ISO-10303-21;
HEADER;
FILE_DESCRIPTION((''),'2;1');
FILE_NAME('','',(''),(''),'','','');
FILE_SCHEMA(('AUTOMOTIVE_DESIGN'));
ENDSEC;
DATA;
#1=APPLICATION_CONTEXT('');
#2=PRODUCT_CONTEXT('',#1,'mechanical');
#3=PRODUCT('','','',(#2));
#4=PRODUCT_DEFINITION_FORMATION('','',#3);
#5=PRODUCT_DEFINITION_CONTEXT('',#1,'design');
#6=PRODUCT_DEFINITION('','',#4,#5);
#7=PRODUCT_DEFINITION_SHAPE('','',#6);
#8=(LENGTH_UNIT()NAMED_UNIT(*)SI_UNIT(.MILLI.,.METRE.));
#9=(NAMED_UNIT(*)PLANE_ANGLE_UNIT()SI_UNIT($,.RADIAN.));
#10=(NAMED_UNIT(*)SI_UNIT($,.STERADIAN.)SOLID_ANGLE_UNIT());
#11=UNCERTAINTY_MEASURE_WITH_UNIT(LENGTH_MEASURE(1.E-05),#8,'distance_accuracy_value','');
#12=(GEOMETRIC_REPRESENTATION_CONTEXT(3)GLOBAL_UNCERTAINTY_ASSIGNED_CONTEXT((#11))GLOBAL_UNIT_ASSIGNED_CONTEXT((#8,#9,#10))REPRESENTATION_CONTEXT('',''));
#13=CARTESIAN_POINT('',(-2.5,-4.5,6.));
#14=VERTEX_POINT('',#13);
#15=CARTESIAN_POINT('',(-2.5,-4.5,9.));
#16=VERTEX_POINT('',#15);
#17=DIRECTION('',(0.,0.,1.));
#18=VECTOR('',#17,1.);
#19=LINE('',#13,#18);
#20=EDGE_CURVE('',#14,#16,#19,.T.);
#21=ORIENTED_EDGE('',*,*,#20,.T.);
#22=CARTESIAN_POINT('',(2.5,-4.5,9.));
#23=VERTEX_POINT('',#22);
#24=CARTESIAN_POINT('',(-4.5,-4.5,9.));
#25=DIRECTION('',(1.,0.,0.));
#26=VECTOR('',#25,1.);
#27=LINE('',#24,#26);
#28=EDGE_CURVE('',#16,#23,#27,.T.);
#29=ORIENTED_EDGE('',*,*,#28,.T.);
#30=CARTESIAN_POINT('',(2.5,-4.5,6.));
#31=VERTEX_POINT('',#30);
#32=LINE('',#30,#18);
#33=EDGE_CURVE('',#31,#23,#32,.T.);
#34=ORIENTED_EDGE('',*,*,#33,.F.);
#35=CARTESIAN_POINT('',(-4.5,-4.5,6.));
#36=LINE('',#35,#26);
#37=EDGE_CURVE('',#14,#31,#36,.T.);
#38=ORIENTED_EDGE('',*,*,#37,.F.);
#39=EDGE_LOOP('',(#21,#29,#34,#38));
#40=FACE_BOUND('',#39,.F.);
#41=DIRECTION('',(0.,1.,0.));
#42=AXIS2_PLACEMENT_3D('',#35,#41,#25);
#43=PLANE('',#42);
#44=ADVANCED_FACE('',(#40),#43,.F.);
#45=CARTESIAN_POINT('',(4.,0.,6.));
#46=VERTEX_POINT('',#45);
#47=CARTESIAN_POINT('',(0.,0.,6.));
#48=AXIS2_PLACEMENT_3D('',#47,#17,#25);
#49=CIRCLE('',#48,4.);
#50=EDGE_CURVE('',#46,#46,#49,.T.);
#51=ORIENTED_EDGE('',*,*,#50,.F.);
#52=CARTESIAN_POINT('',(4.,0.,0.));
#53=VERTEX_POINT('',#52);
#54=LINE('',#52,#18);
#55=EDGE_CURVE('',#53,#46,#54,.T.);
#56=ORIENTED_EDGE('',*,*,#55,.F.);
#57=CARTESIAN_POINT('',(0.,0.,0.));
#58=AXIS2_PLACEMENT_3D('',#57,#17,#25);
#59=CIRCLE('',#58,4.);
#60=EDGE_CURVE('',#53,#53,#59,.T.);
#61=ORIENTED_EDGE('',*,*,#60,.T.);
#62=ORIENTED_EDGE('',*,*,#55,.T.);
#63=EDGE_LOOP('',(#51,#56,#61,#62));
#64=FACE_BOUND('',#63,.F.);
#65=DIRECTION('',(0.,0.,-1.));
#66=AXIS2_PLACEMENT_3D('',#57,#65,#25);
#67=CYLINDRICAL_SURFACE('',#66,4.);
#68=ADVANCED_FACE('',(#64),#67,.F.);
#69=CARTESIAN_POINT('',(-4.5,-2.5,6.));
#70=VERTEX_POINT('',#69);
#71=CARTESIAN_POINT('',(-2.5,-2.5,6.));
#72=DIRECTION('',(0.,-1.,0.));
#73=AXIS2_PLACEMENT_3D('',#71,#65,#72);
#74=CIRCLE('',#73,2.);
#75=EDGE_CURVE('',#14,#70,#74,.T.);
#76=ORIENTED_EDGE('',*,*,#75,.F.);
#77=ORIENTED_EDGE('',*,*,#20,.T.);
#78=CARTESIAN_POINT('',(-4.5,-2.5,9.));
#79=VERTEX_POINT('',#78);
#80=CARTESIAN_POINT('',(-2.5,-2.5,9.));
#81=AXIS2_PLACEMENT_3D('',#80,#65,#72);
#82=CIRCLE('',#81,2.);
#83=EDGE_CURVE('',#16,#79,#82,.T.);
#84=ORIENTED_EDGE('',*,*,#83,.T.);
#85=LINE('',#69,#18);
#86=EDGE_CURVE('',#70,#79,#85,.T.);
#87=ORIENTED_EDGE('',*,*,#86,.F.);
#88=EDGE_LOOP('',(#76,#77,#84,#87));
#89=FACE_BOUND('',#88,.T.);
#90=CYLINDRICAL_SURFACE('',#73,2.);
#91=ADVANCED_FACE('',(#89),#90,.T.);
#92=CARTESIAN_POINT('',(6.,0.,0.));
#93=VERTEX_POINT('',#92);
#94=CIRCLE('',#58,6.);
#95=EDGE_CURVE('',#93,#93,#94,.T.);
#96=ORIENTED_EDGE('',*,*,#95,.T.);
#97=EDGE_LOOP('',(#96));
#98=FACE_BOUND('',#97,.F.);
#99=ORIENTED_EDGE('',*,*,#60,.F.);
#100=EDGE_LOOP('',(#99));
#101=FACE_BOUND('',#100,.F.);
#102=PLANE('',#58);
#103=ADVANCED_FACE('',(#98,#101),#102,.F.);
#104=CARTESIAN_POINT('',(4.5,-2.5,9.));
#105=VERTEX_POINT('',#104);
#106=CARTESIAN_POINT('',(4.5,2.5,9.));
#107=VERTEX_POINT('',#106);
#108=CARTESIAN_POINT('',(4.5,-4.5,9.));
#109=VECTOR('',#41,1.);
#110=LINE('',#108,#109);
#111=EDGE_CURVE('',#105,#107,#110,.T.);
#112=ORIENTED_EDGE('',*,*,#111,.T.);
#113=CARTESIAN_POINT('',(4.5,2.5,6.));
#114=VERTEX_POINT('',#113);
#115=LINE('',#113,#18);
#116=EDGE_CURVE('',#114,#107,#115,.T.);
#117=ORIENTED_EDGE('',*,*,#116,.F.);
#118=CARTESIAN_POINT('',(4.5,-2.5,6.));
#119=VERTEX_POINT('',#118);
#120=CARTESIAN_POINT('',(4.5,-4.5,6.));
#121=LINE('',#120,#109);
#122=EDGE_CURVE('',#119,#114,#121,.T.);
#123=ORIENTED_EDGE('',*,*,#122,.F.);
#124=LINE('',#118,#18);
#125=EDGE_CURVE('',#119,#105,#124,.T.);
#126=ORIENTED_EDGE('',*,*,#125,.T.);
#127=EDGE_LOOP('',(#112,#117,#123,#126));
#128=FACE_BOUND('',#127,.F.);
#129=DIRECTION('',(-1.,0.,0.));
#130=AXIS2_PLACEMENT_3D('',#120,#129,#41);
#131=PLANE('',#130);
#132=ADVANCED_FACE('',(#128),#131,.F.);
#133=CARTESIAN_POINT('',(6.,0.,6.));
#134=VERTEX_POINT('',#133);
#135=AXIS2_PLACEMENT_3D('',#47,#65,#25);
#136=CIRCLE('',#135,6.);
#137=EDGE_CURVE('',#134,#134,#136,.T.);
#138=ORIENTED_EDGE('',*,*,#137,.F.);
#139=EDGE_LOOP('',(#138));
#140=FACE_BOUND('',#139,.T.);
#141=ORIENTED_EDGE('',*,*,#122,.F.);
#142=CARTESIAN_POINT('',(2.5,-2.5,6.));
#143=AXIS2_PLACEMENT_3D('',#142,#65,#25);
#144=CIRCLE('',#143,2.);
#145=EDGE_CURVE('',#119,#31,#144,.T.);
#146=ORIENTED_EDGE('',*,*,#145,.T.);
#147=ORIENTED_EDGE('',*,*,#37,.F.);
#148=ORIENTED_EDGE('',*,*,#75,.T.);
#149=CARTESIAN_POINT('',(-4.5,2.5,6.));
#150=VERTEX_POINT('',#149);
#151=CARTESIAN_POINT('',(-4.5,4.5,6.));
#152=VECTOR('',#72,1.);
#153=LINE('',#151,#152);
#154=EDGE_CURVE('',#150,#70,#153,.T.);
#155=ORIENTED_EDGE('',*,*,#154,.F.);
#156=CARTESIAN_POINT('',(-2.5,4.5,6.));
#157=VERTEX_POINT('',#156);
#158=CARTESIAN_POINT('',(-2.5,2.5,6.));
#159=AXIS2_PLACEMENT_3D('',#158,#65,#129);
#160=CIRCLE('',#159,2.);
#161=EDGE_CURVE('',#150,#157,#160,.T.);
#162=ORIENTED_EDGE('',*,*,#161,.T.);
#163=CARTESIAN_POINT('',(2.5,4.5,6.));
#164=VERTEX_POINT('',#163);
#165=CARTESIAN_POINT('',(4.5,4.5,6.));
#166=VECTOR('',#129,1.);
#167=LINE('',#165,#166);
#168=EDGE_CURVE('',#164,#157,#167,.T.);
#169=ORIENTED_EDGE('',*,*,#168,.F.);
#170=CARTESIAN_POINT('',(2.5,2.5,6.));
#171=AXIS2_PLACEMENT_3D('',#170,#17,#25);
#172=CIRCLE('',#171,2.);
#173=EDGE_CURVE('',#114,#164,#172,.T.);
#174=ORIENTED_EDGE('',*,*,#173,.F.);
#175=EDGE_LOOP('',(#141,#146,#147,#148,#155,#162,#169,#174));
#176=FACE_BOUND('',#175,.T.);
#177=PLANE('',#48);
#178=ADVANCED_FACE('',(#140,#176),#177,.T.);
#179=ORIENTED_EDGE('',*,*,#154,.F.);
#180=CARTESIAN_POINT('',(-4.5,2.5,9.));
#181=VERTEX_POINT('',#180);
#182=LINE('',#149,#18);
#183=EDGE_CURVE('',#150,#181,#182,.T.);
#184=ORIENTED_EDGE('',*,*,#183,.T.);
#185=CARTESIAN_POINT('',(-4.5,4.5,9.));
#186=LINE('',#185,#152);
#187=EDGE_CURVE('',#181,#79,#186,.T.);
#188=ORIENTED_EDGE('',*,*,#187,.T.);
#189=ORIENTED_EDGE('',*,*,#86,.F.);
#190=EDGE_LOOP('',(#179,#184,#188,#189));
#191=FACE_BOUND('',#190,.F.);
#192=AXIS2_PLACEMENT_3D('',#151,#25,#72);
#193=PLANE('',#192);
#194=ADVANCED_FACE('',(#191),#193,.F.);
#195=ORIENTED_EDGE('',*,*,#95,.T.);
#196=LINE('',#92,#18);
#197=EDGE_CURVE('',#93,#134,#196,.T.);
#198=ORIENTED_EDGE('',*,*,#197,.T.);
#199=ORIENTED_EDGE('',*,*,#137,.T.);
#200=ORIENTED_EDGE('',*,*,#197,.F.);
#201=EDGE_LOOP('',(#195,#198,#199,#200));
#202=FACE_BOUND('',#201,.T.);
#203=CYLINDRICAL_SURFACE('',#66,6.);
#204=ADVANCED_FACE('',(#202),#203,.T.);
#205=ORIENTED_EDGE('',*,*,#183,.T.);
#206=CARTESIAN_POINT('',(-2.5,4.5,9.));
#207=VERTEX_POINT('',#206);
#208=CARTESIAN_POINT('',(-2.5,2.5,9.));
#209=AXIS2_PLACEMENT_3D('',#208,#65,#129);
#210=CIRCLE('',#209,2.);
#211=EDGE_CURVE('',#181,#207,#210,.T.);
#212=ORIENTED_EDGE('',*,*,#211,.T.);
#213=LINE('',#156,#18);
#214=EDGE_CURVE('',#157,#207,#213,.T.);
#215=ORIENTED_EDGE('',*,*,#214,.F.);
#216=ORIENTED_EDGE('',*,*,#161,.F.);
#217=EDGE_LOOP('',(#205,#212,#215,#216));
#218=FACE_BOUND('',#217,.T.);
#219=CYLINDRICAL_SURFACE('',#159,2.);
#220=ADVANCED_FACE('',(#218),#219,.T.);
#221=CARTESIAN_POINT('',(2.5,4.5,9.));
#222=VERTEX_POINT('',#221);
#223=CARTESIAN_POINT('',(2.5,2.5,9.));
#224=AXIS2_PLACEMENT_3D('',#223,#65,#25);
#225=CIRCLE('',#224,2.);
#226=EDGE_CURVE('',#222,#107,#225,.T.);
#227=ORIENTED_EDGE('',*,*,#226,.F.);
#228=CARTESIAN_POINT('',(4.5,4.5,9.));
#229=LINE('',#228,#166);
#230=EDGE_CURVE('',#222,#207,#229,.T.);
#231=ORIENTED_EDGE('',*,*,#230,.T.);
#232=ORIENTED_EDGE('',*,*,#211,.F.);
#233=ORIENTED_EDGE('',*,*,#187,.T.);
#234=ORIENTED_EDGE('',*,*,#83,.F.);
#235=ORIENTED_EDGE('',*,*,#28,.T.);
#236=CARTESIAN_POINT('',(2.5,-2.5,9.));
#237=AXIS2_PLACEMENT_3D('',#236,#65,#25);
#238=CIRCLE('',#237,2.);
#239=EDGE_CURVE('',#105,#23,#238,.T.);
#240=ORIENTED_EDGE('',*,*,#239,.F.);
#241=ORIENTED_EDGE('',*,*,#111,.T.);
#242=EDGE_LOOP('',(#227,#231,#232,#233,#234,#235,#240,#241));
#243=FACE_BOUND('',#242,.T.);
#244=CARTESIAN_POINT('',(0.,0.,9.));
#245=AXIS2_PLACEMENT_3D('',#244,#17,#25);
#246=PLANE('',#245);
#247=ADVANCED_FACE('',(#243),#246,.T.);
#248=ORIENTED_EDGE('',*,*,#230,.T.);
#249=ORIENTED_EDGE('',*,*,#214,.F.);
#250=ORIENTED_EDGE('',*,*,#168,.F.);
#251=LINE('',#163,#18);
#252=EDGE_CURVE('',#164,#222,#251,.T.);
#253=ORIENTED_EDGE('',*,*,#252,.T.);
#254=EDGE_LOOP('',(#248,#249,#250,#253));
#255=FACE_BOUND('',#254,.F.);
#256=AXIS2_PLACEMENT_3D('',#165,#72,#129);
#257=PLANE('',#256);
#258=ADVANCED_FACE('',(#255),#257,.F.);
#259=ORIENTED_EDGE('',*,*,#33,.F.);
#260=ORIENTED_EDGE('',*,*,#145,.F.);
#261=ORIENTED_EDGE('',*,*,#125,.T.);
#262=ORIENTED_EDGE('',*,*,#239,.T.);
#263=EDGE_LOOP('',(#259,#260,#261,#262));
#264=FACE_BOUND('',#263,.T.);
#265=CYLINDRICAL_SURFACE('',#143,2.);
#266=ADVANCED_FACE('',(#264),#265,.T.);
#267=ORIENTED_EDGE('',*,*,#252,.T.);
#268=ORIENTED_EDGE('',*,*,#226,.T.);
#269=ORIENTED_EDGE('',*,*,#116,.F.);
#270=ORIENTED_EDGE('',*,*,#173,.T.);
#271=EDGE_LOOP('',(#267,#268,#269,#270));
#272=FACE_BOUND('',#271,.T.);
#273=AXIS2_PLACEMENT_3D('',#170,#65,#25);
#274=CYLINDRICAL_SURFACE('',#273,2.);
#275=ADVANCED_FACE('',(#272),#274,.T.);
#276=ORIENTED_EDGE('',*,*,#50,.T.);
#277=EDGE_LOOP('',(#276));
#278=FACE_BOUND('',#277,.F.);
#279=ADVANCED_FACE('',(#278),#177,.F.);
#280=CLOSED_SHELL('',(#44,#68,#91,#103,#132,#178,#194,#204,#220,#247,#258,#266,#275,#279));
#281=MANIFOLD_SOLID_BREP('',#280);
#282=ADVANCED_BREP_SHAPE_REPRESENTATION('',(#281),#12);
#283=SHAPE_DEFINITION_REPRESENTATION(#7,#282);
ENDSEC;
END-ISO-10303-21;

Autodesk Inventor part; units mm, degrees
ref_plane "YZ Plane" through (0, 0, 0) normal (1, 0, 0) x (0, 1, 0)
ref_plane "XZ Plane" through (0, 0, 0) normal (0, 1, 0) x (-1, 0, 0)
ref_plane "XY Plane" through (0, 0, 0) normal (0, 0, 1) x (1, 0, 0)
sketch "Sketch1" plane through (0, 0, 0) normal (0, 0, 1) x (1, 0, 0)
  circle A0 centre (0, 0) radius 4
  circle A1 centre (0, 0) radius 6
  dimension "d0" = 8
  dimension "d1" = 12
extrude "Extrusion1" add sketch "Sketch1" along normal blind 6
sketch "Sketch2" plane through (0, 0, 6) normal (0, 0, 1) x (1, 0, 0)
  line L0 (-4.5, -4.5) -> (4.5, -4.5)
  line L1 (4.5, -4.5) -> (4.5, 4.5)
  line L2 (4.5, 4.5) -> (-4.5, 4.5)
  line L3 (-4.5, 4.5) -> (-4.5, -4.5)
  line L4 (-4.5, -4.5) -> (4.5, 4.5) construction
  line L5 (4.5, -4.5) -> (-4.5, 4.5) construction
  point P0 (0, 0)
  dimension "d4" = 9
  dimension "d5" = 9
extrude "Extrusion2" add sketch "Sketch2" along normal blind 3
fillet "Fillet1" radius 2 4 edges at (-4.5, -4.5, 7.5) (-4.5, 4.5, 7.5) (4.5, 4.5, 7.5) (4.5, -4.5, 7.5)
thread "Thread1" size "M8x1.25" class "6H" standard "ANSI Metric M Profile" length 6
properties part number "Nakrętka na belkę" material "Aluminum 6061"
